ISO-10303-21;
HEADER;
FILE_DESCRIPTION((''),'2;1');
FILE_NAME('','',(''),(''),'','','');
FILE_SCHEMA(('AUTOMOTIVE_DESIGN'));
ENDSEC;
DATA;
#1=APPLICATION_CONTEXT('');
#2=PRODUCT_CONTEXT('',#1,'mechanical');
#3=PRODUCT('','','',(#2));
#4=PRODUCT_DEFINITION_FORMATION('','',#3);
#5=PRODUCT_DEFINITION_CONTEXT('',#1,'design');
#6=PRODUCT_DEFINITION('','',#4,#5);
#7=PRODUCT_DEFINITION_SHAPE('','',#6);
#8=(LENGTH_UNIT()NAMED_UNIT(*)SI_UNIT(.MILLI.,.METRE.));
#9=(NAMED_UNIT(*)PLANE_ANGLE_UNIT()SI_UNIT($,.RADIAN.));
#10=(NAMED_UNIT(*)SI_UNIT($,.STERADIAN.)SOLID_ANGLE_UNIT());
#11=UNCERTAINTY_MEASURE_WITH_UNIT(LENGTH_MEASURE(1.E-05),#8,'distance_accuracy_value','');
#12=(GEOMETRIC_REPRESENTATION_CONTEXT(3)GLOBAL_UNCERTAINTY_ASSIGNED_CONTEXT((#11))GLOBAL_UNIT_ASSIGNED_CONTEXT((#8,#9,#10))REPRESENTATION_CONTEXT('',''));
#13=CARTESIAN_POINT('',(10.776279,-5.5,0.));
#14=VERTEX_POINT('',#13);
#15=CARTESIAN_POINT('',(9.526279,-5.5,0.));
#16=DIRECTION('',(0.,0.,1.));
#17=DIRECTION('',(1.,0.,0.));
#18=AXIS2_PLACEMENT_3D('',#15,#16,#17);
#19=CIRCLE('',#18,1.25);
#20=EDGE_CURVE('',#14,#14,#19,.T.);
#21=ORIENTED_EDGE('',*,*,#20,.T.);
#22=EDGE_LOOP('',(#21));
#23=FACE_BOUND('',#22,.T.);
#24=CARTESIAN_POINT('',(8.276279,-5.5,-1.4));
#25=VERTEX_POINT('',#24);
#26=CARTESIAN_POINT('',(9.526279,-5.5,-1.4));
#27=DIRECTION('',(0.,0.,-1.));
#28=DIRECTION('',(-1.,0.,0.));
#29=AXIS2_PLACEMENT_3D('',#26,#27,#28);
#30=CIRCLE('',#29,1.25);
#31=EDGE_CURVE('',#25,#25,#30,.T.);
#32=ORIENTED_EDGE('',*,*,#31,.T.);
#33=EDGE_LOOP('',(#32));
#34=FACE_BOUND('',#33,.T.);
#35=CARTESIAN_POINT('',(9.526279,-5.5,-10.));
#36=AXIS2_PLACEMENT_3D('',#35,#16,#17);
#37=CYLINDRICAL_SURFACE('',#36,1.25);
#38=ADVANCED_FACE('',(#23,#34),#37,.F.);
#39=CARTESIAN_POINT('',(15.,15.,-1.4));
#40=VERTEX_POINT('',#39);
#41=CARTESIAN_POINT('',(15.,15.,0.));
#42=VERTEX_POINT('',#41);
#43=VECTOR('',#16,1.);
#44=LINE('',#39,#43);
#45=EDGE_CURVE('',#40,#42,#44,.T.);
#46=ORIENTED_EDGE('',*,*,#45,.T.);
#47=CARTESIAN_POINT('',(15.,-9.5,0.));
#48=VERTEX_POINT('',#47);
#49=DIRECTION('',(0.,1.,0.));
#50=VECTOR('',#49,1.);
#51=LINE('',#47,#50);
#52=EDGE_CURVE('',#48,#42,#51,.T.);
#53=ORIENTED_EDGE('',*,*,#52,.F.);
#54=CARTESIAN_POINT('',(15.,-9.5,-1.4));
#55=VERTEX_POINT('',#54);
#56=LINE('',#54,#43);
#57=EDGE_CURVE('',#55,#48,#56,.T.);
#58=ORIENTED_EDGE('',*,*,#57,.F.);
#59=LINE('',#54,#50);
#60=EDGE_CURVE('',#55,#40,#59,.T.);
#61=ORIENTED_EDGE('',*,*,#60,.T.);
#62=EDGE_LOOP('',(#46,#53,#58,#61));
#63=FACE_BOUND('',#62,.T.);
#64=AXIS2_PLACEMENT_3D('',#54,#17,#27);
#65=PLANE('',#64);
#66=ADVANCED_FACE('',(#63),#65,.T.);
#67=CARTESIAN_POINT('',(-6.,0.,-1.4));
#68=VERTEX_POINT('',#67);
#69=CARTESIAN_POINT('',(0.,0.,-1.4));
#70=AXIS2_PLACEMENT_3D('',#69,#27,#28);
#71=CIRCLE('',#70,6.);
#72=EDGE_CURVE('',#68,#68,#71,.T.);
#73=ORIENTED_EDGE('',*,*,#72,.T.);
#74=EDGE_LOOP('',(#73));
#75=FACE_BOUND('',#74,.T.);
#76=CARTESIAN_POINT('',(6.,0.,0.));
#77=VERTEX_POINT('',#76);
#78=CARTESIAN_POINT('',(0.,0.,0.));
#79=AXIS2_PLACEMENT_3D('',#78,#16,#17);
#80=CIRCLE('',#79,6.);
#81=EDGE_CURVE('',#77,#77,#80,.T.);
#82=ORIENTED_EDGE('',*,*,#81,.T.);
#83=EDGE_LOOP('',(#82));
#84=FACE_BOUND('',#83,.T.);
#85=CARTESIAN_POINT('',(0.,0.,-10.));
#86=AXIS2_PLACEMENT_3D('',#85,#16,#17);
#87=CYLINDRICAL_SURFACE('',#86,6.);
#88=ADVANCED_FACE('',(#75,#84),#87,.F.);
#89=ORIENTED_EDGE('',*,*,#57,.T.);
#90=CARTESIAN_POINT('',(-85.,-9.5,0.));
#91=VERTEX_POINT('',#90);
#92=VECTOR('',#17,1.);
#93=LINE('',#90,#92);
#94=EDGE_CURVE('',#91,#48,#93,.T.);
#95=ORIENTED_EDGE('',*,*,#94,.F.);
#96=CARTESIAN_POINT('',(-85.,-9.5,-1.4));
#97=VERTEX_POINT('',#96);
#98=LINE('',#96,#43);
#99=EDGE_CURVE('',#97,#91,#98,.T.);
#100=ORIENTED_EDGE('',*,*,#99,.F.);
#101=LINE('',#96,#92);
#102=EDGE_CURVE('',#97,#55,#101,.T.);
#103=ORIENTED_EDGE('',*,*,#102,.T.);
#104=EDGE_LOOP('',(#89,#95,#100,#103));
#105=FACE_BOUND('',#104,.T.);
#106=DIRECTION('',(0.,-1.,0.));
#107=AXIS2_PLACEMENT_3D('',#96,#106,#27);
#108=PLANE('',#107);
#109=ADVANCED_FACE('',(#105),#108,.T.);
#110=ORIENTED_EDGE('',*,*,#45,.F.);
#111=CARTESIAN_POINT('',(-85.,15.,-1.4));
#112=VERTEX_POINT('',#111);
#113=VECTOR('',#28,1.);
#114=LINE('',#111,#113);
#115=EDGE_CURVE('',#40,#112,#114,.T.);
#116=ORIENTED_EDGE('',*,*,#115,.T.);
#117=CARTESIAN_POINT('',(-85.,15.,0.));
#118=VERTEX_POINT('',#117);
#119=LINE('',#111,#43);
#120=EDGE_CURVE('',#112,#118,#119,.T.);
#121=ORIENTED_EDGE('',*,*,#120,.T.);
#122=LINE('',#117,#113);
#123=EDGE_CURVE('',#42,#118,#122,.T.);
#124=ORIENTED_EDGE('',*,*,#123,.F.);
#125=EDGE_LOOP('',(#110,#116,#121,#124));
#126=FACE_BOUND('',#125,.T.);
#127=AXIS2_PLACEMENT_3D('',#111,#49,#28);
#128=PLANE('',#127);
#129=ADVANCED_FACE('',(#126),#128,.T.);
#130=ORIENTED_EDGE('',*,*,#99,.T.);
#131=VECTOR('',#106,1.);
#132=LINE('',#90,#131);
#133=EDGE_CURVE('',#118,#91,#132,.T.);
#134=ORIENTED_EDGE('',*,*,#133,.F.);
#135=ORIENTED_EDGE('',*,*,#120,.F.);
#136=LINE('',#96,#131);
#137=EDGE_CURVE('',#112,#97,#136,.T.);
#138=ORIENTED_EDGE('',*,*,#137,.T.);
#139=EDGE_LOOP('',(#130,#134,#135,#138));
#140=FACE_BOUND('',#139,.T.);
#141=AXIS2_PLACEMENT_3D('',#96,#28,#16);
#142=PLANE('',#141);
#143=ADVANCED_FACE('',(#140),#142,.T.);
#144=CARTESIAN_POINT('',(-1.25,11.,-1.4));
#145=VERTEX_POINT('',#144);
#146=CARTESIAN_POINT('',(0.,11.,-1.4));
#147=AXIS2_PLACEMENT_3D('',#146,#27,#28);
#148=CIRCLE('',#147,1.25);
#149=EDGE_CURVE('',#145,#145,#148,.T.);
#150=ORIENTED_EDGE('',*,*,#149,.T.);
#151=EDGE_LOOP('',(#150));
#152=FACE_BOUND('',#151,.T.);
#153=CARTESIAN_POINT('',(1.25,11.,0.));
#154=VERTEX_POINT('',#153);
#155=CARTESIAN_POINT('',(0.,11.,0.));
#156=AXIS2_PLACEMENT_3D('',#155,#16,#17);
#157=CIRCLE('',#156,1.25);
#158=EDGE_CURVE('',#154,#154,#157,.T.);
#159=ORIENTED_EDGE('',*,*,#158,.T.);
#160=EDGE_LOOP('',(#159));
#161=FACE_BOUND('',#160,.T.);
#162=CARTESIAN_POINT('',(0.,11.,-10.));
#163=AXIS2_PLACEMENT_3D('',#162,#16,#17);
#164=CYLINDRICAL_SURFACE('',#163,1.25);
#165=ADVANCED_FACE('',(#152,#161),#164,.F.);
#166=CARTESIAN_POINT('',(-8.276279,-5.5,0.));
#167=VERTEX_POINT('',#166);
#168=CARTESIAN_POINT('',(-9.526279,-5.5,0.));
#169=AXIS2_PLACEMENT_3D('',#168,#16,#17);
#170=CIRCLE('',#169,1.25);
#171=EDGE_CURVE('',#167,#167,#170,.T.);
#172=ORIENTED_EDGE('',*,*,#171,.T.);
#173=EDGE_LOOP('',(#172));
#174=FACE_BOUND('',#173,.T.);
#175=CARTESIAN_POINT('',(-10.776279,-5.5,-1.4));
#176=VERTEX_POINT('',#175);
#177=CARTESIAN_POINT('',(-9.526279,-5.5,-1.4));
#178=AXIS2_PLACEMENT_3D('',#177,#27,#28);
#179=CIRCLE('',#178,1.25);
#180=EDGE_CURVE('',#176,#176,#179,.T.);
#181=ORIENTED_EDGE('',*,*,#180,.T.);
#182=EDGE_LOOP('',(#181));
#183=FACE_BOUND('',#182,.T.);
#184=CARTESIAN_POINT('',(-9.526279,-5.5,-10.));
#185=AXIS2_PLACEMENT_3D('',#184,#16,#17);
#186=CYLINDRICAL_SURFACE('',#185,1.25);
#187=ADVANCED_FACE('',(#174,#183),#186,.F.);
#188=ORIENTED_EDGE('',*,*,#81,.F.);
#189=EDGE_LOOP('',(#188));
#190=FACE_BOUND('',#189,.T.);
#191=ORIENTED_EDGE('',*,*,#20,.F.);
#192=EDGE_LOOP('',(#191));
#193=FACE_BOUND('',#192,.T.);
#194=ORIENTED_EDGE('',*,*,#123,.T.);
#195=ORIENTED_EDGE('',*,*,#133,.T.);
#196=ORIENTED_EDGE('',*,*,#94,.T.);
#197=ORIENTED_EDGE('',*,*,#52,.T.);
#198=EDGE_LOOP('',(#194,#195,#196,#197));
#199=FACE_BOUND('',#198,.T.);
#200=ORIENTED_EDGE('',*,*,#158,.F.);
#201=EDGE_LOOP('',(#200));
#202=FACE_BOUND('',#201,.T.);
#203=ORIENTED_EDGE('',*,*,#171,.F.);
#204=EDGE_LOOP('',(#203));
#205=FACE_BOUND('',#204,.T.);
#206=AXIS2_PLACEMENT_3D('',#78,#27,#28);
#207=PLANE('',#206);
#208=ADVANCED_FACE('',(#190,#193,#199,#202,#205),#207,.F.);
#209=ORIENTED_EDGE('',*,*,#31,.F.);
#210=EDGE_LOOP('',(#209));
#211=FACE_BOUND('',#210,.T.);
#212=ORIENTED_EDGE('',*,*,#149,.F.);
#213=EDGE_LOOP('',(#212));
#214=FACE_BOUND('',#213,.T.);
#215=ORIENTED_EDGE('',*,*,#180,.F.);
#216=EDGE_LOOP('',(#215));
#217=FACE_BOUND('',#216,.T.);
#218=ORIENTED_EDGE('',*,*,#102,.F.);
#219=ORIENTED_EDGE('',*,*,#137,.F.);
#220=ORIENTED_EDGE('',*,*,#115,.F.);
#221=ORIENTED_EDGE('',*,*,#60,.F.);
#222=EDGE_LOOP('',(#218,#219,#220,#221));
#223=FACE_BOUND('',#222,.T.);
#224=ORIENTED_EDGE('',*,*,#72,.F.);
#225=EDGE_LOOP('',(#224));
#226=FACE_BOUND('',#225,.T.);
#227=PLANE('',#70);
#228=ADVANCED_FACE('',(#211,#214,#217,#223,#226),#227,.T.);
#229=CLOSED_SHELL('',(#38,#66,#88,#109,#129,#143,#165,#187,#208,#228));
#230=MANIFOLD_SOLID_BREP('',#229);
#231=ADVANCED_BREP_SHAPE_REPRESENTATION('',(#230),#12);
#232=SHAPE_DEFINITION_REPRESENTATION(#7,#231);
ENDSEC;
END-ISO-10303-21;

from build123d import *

# Parameters (mm, degrees)
SKETCH2_W          = 100
SKETCH2_H          = 24.5
BASE_FLANGE1_DEPTH = 1.4
SKETCH1_R          = 1.25
SKETCH1_R_2        = 6
CUT_EXTRUDE1_DEPTH = 10


# Sheet-metal steps are written as plain solids
with BuildPart() as part:
    # Sketch2 → Base-Flange1 (new body)
    with BuildSketch(Plane.XY):
        with Locations((-35, 2.75)):
            Rectangle(SKETCH2_W, SKETCH2_H)
    extrude(amount=-BASE_FLANGE1_DEPTH)

    # Sketch1 → Cut-Extrude1 (cut)
    with BuildSketch(Plane.XY):
        with Locations((0, 11)):
            Circle(SKETCH1_R)
        with Locations((-9.526279442, -5.5)):
            Circle(SKETCH1_R)
        with Locations((9.526279442, -5.5)):
            Circle(SKETCH1_R)
        Circle(SKETCH1_R_2)
    extrude(amount=-CUT_EXTRUDE1_DEPTH, mode=Mode.SUBTRACT)


solid = part.part
